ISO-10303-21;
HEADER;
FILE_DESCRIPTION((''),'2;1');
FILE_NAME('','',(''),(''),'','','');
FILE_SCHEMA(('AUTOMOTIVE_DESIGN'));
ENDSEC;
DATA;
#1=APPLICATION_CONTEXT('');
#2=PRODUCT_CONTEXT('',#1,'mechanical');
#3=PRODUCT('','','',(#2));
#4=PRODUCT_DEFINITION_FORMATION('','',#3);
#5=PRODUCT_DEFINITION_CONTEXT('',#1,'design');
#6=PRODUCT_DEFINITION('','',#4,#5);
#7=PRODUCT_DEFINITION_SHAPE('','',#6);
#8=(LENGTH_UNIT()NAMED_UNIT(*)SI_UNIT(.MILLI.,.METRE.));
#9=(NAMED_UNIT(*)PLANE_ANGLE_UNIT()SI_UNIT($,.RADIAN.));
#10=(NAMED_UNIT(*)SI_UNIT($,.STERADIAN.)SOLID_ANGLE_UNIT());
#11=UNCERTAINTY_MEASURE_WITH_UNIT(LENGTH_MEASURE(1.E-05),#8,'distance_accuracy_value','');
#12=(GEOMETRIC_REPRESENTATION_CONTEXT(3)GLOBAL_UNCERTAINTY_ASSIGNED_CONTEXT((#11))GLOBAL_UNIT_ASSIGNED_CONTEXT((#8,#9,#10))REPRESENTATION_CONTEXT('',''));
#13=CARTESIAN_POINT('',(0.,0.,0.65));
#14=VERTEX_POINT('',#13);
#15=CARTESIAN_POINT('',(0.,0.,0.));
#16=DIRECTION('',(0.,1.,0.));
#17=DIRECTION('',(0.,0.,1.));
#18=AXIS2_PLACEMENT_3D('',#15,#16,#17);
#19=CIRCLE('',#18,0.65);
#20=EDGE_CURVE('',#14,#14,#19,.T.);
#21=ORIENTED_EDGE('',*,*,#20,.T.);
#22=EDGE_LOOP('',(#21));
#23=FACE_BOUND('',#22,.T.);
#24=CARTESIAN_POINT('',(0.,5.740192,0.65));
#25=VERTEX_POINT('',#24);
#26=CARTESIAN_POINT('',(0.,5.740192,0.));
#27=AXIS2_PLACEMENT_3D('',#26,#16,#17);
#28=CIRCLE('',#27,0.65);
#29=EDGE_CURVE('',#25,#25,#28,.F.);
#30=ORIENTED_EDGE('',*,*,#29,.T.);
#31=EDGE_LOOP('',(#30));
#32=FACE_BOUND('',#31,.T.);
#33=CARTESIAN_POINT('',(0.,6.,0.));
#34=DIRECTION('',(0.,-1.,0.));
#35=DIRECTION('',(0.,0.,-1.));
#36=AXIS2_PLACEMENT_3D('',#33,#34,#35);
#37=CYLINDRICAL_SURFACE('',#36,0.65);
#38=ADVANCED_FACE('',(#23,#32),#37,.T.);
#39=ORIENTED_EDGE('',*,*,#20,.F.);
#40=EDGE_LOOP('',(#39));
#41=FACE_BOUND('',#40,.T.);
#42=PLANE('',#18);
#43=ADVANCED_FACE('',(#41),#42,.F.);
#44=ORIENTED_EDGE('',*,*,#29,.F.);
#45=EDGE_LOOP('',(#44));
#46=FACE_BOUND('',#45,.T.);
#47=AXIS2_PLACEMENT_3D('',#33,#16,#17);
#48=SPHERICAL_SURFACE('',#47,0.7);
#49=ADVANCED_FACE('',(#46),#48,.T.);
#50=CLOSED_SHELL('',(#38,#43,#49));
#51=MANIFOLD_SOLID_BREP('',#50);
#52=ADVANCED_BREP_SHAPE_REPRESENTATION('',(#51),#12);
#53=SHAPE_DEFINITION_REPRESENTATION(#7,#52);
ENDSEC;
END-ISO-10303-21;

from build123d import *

# Parameters (mm, degrees)
SKETCH_1_R      = 0.65
EXTRUDE_1_DEPTH = 6


with BuildPart() as part:
    # Эскиз1 → Бобышка-Вытянуть1 (new body)
    with BuildSketch(Plane(origin=(0, 0, 0), x_dir=(1, 0, 0), z_dir=(0, 1, 0))):
        Circle(SKETCH_1_R)
    extrude(amount=EXTRUDE_1_DEPTH)

    # Эскиз3 → Повернуть23 (revolve)
    with BuildSketch(Plane.XY):
        with BuildLine():
            Line((-0.7, 6), (0.7, 6))
            ThreePointArc((0.7, 6), (0, 6.7), (-0.7, 6))
        make_face()
    revolve(axis=Axis((0.7, 6, 0), (-1, 0, 0)))


solid = part.part
